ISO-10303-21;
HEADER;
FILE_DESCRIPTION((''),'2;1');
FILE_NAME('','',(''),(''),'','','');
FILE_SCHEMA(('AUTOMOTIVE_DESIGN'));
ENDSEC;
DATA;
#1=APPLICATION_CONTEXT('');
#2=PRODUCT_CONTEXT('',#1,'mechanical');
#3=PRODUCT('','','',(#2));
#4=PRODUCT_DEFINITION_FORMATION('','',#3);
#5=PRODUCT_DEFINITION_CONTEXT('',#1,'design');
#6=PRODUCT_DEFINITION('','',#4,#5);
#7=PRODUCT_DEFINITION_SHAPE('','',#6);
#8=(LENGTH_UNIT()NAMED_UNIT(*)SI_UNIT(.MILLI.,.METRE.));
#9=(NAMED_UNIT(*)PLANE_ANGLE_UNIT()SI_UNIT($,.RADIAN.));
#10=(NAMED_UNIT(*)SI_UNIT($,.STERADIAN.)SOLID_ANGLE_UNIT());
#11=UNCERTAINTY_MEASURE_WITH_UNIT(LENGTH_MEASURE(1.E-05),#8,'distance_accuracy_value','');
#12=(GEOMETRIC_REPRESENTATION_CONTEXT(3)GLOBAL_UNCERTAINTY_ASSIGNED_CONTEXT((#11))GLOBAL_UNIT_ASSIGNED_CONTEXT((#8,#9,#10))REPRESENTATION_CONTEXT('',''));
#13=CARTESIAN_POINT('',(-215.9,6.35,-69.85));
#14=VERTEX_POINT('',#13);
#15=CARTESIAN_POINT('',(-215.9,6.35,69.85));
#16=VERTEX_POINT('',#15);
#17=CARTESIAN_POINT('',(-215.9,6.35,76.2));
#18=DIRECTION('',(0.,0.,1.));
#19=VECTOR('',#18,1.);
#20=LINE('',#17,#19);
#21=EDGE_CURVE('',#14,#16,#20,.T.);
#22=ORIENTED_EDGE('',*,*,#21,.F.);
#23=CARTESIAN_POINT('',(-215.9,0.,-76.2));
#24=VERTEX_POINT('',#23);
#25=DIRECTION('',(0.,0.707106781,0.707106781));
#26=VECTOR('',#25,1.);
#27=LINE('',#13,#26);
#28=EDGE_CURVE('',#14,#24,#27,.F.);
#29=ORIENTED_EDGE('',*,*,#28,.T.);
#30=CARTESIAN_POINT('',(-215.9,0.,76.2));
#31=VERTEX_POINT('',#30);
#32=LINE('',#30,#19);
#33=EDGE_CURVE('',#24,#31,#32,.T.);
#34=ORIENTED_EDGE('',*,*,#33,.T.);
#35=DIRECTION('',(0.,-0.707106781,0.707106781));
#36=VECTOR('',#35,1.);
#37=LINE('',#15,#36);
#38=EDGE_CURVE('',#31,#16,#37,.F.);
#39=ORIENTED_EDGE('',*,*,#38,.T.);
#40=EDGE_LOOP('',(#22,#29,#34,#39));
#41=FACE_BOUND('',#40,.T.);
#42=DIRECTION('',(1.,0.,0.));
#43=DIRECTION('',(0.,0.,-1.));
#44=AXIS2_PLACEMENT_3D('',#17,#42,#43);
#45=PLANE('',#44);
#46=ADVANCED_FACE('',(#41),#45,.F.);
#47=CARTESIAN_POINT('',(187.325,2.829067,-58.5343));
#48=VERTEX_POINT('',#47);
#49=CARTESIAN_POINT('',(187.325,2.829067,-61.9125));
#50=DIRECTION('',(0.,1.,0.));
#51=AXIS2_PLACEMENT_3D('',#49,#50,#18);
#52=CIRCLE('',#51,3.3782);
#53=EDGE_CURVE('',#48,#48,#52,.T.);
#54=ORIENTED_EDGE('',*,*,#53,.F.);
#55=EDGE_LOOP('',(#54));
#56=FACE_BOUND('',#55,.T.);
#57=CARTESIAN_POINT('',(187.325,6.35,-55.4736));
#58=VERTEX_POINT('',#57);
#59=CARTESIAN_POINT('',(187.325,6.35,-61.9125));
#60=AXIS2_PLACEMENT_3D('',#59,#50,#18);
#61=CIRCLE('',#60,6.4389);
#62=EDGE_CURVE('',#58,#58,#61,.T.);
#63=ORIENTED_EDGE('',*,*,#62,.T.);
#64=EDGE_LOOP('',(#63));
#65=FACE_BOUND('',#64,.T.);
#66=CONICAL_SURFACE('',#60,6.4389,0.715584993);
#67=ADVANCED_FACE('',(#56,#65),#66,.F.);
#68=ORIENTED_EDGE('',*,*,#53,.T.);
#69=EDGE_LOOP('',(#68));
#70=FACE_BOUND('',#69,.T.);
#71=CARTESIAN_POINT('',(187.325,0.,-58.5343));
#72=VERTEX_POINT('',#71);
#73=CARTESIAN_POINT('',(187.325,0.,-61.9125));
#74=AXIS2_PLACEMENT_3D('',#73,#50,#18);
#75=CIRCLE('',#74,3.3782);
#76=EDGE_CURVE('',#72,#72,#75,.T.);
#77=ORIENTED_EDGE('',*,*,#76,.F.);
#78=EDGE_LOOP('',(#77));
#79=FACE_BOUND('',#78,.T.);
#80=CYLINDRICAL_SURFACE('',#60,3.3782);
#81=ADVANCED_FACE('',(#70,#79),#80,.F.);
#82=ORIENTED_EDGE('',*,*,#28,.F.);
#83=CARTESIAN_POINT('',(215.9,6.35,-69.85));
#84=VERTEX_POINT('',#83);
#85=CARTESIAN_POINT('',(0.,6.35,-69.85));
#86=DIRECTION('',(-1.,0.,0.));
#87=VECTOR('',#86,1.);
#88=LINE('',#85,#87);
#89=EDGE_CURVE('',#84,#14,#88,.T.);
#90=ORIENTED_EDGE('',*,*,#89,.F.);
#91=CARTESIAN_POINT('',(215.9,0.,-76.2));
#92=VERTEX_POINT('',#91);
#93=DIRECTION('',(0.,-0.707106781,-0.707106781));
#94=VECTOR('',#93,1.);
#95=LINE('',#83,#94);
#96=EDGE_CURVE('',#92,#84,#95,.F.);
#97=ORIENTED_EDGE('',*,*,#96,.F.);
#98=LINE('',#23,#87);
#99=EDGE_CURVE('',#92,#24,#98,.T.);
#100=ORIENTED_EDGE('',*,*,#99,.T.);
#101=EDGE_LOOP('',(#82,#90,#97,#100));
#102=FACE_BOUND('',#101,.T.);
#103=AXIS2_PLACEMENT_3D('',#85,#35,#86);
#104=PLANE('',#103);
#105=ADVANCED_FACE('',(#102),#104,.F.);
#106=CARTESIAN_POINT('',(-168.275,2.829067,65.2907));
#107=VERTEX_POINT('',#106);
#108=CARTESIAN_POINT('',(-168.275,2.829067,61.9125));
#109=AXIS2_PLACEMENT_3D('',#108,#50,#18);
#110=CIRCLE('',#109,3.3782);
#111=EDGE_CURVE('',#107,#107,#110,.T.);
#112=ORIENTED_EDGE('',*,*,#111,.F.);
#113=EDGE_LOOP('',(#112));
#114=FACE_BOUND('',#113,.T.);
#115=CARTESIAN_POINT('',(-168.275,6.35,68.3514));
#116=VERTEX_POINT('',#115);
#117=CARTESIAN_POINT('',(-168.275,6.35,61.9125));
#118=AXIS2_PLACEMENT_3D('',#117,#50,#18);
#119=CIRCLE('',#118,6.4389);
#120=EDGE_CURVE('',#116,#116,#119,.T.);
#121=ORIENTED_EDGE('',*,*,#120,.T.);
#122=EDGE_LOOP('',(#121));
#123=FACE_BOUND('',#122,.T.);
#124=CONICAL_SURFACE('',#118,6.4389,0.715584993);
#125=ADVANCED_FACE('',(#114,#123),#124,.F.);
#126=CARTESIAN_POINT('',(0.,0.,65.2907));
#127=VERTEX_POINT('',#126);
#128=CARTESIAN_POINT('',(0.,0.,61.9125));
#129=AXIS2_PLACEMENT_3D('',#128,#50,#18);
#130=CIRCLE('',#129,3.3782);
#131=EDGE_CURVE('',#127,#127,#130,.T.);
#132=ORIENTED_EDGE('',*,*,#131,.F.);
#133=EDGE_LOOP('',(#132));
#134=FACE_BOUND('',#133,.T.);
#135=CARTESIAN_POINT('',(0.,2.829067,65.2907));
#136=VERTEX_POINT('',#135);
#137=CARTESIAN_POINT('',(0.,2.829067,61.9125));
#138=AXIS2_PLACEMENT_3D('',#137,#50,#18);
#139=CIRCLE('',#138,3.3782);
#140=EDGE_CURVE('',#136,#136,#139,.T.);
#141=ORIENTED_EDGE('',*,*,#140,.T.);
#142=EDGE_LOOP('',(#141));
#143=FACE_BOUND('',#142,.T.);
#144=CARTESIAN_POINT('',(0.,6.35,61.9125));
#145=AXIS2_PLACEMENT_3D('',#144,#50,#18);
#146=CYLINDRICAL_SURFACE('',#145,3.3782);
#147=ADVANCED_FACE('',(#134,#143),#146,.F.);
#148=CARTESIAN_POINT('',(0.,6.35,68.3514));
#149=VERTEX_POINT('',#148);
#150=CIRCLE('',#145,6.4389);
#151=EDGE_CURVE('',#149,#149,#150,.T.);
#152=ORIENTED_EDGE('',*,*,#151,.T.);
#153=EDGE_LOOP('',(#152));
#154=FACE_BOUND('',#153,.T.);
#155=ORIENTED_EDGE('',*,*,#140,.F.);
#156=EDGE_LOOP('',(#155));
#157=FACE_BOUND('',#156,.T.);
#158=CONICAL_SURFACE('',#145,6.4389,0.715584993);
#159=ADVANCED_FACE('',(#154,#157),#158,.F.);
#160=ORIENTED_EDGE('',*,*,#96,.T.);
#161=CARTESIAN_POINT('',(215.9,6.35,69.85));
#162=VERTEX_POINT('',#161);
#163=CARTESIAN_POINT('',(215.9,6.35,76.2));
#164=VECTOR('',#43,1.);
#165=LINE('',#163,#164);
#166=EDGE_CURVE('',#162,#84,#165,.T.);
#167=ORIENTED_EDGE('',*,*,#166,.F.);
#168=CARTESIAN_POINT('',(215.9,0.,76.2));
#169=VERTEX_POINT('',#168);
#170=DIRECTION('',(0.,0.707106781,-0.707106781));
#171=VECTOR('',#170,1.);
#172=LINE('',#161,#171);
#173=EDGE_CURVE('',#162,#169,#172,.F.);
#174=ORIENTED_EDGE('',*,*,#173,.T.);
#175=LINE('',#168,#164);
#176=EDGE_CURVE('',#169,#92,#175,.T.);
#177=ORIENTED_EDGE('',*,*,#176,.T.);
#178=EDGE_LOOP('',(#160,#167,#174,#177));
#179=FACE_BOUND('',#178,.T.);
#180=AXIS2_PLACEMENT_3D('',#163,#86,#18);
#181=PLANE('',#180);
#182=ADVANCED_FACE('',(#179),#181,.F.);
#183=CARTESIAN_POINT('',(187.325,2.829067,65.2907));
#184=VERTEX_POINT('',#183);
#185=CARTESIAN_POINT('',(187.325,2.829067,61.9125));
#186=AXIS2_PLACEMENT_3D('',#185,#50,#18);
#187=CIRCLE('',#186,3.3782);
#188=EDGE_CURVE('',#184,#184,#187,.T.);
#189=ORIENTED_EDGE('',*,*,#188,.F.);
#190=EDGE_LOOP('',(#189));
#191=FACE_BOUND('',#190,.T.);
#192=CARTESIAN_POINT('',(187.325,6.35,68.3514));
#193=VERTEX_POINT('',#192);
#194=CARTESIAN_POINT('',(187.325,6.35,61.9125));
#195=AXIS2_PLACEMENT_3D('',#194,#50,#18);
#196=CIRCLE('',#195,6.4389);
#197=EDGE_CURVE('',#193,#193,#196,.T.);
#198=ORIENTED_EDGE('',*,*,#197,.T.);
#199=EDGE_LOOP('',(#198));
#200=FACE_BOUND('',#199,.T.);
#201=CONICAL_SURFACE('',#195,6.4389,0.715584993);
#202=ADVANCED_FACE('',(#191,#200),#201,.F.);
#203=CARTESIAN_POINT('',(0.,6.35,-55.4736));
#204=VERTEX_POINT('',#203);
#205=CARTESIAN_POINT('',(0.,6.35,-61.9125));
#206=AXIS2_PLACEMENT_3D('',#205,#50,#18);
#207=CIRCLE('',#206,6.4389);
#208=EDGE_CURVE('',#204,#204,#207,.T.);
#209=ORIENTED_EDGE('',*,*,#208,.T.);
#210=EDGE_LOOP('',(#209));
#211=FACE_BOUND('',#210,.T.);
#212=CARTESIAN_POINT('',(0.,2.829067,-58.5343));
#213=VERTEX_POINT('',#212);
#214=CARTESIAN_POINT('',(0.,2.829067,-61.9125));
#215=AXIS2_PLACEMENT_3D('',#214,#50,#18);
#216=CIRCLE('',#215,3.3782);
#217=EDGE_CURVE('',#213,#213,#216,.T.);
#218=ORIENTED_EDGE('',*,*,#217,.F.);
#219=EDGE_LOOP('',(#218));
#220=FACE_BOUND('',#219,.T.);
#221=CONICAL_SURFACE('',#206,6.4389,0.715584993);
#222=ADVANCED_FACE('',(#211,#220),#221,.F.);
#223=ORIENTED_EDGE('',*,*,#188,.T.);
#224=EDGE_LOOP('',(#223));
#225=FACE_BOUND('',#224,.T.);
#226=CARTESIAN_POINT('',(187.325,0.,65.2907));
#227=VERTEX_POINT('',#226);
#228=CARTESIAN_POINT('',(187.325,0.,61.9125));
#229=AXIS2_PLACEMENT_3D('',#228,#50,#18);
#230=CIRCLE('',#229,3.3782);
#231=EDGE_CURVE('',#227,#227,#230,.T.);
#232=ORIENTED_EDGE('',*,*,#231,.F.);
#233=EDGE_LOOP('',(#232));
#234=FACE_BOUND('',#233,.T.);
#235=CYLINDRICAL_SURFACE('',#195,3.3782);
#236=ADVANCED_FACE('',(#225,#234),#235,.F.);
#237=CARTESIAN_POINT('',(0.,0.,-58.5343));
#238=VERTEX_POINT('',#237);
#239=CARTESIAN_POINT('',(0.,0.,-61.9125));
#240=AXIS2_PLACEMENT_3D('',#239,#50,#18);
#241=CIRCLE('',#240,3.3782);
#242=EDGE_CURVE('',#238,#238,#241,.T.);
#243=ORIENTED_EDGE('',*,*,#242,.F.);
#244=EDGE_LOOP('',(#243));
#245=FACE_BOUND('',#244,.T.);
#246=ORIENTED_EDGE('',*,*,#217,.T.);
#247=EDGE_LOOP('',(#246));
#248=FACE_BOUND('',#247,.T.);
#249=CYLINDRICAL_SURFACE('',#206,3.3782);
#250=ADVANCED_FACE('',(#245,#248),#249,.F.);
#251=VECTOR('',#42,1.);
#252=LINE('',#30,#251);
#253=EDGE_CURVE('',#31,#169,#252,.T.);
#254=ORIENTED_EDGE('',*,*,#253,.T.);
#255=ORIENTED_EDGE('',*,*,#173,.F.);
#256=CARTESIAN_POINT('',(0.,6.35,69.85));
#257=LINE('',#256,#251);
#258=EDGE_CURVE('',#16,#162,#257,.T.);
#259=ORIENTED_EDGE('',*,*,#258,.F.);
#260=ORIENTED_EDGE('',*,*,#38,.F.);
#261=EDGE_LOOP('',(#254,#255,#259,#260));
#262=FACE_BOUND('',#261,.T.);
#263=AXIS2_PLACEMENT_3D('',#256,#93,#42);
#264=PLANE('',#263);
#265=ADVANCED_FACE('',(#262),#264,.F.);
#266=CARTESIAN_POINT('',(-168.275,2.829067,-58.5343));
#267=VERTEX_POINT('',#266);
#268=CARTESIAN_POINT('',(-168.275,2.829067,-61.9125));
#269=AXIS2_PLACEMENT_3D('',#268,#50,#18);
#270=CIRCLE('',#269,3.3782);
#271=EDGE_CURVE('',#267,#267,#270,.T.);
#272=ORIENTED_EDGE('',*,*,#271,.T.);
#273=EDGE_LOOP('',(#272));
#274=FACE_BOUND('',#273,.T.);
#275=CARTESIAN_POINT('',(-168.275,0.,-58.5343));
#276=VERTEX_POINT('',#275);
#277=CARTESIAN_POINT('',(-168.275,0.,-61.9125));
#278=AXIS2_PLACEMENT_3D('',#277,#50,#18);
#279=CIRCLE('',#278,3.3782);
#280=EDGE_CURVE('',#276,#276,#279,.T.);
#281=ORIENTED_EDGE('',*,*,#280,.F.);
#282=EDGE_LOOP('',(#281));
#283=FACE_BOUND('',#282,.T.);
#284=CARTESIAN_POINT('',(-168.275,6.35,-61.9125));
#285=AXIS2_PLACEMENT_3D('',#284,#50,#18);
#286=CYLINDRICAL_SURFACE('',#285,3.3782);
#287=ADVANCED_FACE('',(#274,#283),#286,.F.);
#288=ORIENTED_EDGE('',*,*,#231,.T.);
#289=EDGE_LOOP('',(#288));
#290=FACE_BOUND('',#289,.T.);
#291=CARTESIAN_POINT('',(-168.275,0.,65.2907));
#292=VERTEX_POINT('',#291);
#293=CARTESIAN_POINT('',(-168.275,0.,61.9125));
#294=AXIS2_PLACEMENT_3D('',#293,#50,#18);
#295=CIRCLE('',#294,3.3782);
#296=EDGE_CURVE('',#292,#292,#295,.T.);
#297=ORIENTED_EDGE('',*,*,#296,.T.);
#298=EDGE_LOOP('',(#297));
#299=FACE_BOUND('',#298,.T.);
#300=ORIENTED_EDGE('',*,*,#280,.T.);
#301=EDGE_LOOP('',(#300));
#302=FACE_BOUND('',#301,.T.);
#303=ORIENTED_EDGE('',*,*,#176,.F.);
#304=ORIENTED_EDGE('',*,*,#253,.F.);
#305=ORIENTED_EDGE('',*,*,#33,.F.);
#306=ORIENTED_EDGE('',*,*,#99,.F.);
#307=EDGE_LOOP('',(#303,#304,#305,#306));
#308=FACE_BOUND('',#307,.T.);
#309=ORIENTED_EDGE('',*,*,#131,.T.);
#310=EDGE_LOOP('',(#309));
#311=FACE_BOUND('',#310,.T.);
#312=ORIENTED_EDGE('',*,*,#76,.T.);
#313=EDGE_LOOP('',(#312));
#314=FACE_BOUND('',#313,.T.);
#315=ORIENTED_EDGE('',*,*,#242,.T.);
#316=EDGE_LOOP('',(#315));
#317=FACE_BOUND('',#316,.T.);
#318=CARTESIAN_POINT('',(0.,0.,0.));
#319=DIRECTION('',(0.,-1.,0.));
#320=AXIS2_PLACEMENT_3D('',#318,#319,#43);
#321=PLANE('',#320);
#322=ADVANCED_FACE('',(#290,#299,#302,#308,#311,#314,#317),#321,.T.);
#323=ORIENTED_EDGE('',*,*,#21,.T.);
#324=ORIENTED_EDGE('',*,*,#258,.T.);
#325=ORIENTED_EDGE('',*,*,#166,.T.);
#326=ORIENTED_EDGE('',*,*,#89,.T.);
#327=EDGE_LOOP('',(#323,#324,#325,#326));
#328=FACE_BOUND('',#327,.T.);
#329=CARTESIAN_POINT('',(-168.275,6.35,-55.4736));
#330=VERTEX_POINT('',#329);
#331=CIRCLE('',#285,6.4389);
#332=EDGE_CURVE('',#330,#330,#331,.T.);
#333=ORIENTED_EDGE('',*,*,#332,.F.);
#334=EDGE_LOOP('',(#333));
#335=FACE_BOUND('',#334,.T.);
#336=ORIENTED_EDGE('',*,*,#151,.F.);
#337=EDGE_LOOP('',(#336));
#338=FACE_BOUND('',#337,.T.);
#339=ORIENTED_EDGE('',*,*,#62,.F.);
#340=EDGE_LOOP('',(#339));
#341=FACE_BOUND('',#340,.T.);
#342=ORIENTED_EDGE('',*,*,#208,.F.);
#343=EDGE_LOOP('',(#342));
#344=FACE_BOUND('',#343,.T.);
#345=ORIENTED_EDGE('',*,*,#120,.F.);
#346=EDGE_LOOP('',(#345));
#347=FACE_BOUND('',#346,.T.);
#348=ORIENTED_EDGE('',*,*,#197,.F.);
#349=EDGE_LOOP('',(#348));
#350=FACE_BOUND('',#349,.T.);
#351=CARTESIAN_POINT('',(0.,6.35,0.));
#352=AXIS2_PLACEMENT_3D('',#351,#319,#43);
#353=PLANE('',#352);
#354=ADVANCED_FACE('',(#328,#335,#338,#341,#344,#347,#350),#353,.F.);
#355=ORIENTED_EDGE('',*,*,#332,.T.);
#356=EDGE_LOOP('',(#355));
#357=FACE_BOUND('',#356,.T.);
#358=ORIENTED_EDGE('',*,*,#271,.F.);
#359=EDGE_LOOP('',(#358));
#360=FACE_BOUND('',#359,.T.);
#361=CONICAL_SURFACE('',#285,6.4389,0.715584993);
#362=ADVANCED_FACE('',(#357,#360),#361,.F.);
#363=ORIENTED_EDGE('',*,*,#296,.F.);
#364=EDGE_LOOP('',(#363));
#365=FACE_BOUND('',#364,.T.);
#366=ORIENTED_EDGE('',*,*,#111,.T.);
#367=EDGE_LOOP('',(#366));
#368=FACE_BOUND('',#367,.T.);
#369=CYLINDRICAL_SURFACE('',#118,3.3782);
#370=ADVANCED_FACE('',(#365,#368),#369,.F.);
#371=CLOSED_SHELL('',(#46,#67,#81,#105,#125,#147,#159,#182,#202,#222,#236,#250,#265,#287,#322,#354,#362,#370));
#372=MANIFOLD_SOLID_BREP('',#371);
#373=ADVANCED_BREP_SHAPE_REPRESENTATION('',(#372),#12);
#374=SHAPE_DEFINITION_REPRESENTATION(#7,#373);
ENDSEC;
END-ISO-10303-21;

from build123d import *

# Parameters (mm, degrees)
SKETCH1_W                                     = 431.8
SKETCH1_H                                     = 152.4
BOSS_EXTRUDE1_DEPTH                           = 6.35
CHAMFER1_SIZE                                 = 6.35
CSK_FOR_1_4_FLAT_HEAD_MACHINE_SCREW1_AT_COUNT = 2
CSK_FOR_1_4_FLAT_HEAD_MACHINE_SCREW1_AT_PITCH = 187.325
CSK_FOR_1_4_FLAT_HEAD_MACHINE_SCREW1_2_COUNT  = 2
CSK_FOR_1_4_FLAT_HEAD_MACHINE_SCREW1_2_PITCH  = 355.6
CSK_FOR_1_4_FLAT_HEAD_MACHINE_SCREW1_3_COUNT  = 2
CSK_FOR_1_4_FLAT_HEAD_MACHINE_SCREW1_3_PITCH  = 376.542149865
CSK_FOR_1_4_FLAT_HEAD_MACHINE_SCREW1_4_COUNT  = 2
CSK_FOR_1_4_FLAT_HEAD_MACHINE_SCREW1_4_PITCH  = 123.825
CSK_FOR_1_4_FLAT_HEAD_MACHINE_SCREW1_5_COUNT  = 2
CSK_FOR_1_4_FLAT_HEAD_MACHINE_SCREW1_5_PITCH  = 224.551299818


with BuildPart() as part:
    # Sketch1 → Boss-Extrude1 (new body)
    with BuildSketch(Plane(origin=(0, 0, 0), x_dir=(1, 0, 0), z_dir=(0, 1, 0))):
        Rectangle(SKETCH1_W, SKETCH1_H)
    extrude(amount=BOSS_EXTRUDE1_DEPTH)

    # Chamfer1
    chamfer1_edges = [part.edges().sort_by_distance(p)[0] for p in [
        (0, 6.35, 76.2),
        (0, 6.35, -76.2),
    ]]
    chamfer(chamfer1_edges, length=CHAMFER1_SIZE - 0.0001)  # a hair under: the kernel refuses the full size

    # Sketch3 → CSK for 1/4 Flat Head Machine Screw1 (revolve, cut)
    with BuildSketch(Plane(origin=(187.325, 6.35, 61.9125), x_dir=(0, 0, 1), z_dir=(1, 0, 0))):
        Polygon((0, 0), (0, 6.35), (3.3782, 6.35), (3.3782, 3.520932584), (6.4389, 0), align=None)
    csk_for_1_4_flat_head_machine_screw1 = revolve(axis=Axis((187.325, 12.7, 61.9125), (0, -1, 0)), mode=Mode.SUBTRACT)

    # CSK for 1/4 Flat Head Machine Screw1 at: CSK for 1/4 Flat Head Machine Screw1 ×2
    with Locations(*[(-i * CSK_FOR_1_4_FLAT_HEAD_MACHINE_SCREW1_AT_PITCH, 0, 0) for i in range(1, CSK_FOR_1_4_FLAT_HEAD_MACHINE_SCREW1_AT_COUNT)]):
        add(csk_for_1_4_flat_head_machine_screw1, mode=Mode.SUBTRACT)

    # CSK for 1_4 Flat Head Machine Screw1 2: CSK for 1/4 Flat Head Machine Screw1 ×2
    with Locations(*[(-i * CSK_FOR_1_4_FLAT_HEAD_MACHINE_SCREW1_2_PITCH, 0, 0) for i in range(1, CSK_FOR_1_4_FLAT_HEAD_MACHINE_SCREW1_2_COUNT)]):
        add(csk_for_1_4_flat_head_machine_screw1, mode=Mode.SUBTRACT)

    # CSK for 1_4 Flat Head Machine Screw1 3: CSK for 1/4 Flat Head Machine Screw1 ×2
    with Locations(*[Vector(-0.9443829864131722, 0, -0.32884764705458697) * (i * CSK_FOR_1_4_FLAT_HEAD_MACHINE_SCREW1_3_PITCH) for i in range(1, CSK_FOR_1_4_FLAT_HEAD_MACHINE_SCREW1_3_COUNT)]):
        add(csk_for_1_4_flat_head_machine_screw1, mode=Mode.SUBTRACT)

    # CSK for 1_4 Flat Head Machine Screw1 4: CSK for 1/4 Flat Head Machine Screw1 ×2
    with Locations(*[(0, 0, -i * CSK_FOR_1_4_FLAT_HEAD_MACHINE_SCREW1_4_PITCH) for i in range(1, CSK_FOR_1_4_FLAT_HEAD_MACHINE_SCREW1_4_COUNT)]):
        add(csk_for_1_4_flat_head_machine_screw1, mode=Mode.SUBTRACT)

    # CSK for 1_4 Flat Head Machine Screw1 5: CSK for 1/4 Flat Head Machine Screw1 ×2
    with Locations(*[Vector(-0.8342191746462441, 0, -0.5514330137492126) * (i * CSK_FOR_1_4_FLAT_HEAD_MACHINE_SCREW1_5_PITCH) for i in range(1, CSK_FOR_1_4_FLAT_HEAD_MACHINE_SCREW1_5_COUNT)]):
        add(csk_for_1_4_flat_head_machine_screw1, mode=Mode.SUBTRACT)


solid = part.part
